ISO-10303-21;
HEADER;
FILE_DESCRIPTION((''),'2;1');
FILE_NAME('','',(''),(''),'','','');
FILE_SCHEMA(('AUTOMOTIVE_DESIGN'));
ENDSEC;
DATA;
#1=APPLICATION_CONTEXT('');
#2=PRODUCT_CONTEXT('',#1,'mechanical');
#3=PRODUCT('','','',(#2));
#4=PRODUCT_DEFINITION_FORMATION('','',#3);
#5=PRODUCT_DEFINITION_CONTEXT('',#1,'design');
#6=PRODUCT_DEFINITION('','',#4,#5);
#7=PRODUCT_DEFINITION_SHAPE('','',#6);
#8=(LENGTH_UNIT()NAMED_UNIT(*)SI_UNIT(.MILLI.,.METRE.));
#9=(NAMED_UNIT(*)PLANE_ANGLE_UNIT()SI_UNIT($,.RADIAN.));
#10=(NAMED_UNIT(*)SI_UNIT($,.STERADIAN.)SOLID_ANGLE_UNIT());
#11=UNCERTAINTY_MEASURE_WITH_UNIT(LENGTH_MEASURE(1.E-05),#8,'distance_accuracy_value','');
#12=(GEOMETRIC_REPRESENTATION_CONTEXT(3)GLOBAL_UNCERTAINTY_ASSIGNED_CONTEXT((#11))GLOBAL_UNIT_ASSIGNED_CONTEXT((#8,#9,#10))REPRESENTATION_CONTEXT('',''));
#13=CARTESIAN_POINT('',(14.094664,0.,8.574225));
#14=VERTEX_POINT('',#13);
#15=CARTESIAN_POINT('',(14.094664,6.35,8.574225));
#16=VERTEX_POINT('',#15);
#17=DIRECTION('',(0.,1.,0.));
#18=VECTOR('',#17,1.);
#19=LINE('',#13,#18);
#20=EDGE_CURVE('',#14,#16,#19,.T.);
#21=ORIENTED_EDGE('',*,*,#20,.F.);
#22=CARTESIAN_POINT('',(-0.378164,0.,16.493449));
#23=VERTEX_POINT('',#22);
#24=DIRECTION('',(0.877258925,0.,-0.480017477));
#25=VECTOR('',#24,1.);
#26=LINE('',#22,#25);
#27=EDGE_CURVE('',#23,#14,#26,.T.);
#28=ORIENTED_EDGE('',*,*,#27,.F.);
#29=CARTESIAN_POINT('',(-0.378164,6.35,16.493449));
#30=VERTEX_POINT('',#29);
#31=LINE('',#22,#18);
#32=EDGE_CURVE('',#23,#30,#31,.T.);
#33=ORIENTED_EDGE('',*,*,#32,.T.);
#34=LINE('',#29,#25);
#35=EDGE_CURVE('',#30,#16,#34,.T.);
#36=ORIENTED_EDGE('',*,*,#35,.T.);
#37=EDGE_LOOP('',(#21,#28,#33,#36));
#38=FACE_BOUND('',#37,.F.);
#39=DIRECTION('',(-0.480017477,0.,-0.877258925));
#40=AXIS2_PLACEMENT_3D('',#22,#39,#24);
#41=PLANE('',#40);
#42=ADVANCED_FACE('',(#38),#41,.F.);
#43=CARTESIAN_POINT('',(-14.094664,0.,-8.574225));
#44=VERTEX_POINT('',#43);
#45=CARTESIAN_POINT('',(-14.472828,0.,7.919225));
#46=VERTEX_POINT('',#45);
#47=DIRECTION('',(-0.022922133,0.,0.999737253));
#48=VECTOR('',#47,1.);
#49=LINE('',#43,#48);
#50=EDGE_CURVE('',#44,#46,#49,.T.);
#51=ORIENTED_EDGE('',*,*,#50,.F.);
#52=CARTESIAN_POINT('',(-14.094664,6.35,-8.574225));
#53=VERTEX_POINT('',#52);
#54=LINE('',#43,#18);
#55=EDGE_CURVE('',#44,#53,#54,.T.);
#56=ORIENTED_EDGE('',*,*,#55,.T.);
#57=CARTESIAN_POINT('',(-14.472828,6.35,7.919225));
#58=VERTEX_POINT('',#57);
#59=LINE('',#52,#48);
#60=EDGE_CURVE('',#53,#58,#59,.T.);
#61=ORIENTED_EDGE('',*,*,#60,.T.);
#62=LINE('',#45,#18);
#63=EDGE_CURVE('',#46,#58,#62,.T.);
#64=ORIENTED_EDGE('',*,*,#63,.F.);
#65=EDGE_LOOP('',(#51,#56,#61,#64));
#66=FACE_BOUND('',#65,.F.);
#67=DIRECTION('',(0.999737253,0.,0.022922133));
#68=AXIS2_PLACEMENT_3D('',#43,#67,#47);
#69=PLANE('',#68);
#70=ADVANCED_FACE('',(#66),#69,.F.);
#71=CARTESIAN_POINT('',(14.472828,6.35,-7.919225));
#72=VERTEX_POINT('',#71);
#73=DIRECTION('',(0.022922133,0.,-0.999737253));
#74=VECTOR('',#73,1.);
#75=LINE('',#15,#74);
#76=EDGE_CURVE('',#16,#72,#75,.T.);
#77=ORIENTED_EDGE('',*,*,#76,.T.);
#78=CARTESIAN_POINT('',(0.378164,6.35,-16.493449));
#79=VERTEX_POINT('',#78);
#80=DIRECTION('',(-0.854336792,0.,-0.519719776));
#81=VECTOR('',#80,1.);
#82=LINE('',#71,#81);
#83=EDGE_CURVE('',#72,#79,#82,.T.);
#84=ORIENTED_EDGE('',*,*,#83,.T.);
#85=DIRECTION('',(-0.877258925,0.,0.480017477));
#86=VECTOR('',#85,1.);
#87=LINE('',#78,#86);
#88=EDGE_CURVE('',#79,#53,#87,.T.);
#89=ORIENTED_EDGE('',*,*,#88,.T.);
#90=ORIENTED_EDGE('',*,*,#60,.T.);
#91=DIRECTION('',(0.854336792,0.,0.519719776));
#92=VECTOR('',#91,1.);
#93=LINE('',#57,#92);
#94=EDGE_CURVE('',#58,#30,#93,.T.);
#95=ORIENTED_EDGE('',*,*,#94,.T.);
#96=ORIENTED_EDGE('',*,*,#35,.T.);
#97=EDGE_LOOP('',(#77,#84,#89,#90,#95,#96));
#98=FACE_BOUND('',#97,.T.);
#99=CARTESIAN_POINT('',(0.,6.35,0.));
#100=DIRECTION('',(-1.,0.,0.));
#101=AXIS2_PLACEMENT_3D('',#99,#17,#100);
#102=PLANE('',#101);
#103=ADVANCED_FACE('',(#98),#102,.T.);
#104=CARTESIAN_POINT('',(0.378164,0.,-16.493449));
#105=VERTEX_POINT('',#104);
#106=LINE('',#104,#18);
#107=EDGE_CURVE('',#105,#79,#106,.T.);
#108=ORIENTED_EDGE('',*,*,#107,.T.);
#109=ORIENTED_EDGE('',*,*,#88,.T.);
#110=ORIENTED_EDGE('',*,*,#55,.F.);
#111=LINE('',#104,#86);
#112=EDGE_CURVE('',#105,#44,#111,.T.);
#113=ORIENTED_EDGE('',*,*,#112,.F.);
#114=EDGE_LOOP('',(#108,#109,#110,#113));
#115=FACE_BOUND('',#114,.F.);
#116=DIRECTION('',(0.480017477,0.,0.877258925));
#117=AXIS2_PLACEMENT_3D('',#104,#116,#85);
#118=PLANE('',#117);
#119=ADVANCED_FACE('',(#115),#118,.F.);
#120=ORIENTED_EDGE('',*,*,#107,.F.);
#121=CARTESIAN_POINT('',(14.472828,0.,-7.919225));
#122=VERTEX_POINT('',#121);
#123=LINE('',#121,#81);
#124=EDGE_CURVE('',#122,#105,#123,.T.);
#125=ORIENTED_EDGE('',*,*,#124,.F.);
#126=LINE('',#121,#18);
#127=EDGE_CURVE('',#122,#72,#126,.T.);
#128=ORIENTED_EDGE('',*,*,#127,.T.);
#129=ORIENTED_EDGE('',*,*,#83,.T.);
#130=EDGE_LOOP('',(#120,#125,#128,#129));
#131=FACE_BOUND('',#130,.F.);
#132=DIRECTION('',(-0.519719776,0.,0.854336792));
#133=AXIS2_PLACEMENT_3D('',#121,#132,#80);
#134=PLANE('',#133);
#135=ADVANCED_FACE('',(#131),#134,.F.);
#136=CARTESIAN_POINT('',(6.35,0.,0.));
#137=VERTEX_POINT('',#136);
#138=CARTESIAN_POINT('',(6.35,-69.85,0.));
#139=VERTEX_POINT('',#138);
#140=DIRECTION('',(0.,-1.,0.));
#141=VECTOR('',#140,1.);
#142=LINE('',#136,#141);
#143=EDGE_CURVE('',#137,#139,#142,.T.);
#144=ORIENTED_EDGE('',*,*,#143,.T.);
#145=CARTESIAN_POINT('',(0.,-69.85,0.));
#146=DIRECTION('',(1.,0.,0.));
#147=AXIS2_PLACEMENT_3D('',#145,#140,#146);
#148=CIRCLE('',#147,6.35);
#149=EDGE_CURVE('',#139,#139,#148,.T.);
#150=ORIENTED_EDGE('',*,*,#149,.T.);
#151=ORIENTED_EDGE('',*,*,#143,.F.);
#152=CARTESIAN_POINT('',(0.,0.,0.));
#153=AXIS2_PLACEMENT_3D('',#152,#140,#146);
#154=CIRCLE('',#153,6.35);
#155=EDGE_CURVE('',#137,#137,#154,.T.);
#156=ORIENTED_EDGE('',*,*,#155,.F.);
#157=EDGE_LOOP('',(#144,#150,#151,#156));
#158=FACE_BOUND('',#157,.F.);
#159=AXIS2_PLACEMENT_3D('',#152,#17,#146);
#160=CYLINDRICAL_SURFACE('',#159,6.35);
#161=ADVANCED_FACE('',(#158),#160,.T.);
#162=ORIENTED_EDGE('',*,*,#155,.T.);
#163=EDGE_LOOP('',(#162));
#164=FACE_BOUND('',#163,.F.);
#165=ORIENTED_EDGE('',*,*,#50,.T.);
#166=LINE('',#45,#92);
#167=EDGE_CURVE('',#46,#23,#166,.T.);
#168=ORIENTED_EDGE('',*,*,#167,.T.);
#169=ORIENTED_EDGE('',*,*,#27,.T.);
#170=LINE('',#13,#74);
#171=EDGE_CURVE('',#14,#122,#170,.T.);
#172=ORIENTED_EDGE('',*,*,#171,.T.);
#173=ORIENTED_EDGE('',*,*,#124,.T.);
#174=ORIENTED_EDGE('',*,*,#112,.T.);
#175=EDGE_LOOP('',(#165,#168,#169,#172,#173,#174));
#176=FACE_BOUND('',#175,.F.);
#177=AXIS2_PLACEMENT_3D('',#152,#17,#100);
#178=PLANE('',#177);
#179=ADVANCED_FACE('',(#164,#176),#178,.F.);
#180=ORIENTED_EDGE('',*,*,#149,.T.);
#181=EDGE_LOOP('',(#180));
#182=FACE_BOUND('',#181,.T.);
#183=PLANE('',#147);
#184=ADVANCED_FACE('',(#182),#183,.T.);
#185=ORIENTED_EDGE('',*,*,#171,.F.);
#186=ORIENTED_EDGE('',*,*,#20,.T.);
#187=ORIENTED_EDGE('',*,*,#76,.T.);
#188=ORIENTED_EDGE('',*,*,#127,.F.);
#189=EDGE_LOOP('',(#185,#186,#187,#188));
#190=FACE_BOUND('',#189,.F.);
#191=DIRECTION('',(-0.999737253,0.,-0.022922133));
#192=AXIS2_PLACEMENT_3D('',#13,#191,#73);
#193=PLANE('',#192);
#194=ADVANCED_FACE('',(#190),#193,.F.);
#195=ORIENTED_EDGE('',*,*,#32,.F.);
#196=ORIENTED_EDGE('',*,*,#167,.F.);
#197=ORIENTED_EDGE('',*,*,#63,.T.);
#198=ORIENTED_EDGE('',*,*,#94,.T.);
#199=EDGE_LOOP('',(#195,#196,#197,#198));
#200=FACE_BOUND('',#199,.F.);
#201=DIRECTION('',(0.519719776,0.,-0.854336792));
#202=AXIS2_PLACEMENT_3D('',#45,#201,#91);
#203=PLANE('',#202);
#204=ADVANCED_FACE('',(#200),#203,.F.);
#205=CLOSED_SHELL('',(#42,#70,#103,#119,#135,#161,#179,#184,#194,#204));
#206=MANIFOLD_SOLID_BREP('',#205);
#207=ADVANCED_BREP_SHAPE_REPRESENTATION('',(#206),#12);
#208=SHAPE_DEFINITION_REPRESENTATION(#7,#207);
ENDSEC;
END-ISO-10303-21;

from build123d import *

# Parameters (mm, degrees)
F0_R     = 6.35
F1_DEPTH = 69.85
F2_R     = 6.35
F3_DEPTH = 6.35


with BuildPart() as f1:
    # F0 (on Front) → F1 (new body)
    with BuildSketch(Plane.XZ):
        Circle(F0_R)
    extrude(amount=F1_DEPTH)

    # F2 (on face) → F3 (join)
    with BuildSketch(Plane(origin=(0, 0, 0), x_dir=(-1, 0, 0), z_dir=(0, 1, 0))):
        Polygon((14.4728282073, 7.9192246264), (0.3781643989, 16.4934492053), (-14.0946638083, 8.5742245789), (-14.4728282073, -7.9192246264), (-0.3781643989, -16.4934492053), (14.0946638083, -8.5742245789), align=None)
        Circle(F2_R, mode=Mode.SUBTRACT)
        Circle(F2_R)
    extrude(amount=F3_DEPTH)


solid = f1.part
